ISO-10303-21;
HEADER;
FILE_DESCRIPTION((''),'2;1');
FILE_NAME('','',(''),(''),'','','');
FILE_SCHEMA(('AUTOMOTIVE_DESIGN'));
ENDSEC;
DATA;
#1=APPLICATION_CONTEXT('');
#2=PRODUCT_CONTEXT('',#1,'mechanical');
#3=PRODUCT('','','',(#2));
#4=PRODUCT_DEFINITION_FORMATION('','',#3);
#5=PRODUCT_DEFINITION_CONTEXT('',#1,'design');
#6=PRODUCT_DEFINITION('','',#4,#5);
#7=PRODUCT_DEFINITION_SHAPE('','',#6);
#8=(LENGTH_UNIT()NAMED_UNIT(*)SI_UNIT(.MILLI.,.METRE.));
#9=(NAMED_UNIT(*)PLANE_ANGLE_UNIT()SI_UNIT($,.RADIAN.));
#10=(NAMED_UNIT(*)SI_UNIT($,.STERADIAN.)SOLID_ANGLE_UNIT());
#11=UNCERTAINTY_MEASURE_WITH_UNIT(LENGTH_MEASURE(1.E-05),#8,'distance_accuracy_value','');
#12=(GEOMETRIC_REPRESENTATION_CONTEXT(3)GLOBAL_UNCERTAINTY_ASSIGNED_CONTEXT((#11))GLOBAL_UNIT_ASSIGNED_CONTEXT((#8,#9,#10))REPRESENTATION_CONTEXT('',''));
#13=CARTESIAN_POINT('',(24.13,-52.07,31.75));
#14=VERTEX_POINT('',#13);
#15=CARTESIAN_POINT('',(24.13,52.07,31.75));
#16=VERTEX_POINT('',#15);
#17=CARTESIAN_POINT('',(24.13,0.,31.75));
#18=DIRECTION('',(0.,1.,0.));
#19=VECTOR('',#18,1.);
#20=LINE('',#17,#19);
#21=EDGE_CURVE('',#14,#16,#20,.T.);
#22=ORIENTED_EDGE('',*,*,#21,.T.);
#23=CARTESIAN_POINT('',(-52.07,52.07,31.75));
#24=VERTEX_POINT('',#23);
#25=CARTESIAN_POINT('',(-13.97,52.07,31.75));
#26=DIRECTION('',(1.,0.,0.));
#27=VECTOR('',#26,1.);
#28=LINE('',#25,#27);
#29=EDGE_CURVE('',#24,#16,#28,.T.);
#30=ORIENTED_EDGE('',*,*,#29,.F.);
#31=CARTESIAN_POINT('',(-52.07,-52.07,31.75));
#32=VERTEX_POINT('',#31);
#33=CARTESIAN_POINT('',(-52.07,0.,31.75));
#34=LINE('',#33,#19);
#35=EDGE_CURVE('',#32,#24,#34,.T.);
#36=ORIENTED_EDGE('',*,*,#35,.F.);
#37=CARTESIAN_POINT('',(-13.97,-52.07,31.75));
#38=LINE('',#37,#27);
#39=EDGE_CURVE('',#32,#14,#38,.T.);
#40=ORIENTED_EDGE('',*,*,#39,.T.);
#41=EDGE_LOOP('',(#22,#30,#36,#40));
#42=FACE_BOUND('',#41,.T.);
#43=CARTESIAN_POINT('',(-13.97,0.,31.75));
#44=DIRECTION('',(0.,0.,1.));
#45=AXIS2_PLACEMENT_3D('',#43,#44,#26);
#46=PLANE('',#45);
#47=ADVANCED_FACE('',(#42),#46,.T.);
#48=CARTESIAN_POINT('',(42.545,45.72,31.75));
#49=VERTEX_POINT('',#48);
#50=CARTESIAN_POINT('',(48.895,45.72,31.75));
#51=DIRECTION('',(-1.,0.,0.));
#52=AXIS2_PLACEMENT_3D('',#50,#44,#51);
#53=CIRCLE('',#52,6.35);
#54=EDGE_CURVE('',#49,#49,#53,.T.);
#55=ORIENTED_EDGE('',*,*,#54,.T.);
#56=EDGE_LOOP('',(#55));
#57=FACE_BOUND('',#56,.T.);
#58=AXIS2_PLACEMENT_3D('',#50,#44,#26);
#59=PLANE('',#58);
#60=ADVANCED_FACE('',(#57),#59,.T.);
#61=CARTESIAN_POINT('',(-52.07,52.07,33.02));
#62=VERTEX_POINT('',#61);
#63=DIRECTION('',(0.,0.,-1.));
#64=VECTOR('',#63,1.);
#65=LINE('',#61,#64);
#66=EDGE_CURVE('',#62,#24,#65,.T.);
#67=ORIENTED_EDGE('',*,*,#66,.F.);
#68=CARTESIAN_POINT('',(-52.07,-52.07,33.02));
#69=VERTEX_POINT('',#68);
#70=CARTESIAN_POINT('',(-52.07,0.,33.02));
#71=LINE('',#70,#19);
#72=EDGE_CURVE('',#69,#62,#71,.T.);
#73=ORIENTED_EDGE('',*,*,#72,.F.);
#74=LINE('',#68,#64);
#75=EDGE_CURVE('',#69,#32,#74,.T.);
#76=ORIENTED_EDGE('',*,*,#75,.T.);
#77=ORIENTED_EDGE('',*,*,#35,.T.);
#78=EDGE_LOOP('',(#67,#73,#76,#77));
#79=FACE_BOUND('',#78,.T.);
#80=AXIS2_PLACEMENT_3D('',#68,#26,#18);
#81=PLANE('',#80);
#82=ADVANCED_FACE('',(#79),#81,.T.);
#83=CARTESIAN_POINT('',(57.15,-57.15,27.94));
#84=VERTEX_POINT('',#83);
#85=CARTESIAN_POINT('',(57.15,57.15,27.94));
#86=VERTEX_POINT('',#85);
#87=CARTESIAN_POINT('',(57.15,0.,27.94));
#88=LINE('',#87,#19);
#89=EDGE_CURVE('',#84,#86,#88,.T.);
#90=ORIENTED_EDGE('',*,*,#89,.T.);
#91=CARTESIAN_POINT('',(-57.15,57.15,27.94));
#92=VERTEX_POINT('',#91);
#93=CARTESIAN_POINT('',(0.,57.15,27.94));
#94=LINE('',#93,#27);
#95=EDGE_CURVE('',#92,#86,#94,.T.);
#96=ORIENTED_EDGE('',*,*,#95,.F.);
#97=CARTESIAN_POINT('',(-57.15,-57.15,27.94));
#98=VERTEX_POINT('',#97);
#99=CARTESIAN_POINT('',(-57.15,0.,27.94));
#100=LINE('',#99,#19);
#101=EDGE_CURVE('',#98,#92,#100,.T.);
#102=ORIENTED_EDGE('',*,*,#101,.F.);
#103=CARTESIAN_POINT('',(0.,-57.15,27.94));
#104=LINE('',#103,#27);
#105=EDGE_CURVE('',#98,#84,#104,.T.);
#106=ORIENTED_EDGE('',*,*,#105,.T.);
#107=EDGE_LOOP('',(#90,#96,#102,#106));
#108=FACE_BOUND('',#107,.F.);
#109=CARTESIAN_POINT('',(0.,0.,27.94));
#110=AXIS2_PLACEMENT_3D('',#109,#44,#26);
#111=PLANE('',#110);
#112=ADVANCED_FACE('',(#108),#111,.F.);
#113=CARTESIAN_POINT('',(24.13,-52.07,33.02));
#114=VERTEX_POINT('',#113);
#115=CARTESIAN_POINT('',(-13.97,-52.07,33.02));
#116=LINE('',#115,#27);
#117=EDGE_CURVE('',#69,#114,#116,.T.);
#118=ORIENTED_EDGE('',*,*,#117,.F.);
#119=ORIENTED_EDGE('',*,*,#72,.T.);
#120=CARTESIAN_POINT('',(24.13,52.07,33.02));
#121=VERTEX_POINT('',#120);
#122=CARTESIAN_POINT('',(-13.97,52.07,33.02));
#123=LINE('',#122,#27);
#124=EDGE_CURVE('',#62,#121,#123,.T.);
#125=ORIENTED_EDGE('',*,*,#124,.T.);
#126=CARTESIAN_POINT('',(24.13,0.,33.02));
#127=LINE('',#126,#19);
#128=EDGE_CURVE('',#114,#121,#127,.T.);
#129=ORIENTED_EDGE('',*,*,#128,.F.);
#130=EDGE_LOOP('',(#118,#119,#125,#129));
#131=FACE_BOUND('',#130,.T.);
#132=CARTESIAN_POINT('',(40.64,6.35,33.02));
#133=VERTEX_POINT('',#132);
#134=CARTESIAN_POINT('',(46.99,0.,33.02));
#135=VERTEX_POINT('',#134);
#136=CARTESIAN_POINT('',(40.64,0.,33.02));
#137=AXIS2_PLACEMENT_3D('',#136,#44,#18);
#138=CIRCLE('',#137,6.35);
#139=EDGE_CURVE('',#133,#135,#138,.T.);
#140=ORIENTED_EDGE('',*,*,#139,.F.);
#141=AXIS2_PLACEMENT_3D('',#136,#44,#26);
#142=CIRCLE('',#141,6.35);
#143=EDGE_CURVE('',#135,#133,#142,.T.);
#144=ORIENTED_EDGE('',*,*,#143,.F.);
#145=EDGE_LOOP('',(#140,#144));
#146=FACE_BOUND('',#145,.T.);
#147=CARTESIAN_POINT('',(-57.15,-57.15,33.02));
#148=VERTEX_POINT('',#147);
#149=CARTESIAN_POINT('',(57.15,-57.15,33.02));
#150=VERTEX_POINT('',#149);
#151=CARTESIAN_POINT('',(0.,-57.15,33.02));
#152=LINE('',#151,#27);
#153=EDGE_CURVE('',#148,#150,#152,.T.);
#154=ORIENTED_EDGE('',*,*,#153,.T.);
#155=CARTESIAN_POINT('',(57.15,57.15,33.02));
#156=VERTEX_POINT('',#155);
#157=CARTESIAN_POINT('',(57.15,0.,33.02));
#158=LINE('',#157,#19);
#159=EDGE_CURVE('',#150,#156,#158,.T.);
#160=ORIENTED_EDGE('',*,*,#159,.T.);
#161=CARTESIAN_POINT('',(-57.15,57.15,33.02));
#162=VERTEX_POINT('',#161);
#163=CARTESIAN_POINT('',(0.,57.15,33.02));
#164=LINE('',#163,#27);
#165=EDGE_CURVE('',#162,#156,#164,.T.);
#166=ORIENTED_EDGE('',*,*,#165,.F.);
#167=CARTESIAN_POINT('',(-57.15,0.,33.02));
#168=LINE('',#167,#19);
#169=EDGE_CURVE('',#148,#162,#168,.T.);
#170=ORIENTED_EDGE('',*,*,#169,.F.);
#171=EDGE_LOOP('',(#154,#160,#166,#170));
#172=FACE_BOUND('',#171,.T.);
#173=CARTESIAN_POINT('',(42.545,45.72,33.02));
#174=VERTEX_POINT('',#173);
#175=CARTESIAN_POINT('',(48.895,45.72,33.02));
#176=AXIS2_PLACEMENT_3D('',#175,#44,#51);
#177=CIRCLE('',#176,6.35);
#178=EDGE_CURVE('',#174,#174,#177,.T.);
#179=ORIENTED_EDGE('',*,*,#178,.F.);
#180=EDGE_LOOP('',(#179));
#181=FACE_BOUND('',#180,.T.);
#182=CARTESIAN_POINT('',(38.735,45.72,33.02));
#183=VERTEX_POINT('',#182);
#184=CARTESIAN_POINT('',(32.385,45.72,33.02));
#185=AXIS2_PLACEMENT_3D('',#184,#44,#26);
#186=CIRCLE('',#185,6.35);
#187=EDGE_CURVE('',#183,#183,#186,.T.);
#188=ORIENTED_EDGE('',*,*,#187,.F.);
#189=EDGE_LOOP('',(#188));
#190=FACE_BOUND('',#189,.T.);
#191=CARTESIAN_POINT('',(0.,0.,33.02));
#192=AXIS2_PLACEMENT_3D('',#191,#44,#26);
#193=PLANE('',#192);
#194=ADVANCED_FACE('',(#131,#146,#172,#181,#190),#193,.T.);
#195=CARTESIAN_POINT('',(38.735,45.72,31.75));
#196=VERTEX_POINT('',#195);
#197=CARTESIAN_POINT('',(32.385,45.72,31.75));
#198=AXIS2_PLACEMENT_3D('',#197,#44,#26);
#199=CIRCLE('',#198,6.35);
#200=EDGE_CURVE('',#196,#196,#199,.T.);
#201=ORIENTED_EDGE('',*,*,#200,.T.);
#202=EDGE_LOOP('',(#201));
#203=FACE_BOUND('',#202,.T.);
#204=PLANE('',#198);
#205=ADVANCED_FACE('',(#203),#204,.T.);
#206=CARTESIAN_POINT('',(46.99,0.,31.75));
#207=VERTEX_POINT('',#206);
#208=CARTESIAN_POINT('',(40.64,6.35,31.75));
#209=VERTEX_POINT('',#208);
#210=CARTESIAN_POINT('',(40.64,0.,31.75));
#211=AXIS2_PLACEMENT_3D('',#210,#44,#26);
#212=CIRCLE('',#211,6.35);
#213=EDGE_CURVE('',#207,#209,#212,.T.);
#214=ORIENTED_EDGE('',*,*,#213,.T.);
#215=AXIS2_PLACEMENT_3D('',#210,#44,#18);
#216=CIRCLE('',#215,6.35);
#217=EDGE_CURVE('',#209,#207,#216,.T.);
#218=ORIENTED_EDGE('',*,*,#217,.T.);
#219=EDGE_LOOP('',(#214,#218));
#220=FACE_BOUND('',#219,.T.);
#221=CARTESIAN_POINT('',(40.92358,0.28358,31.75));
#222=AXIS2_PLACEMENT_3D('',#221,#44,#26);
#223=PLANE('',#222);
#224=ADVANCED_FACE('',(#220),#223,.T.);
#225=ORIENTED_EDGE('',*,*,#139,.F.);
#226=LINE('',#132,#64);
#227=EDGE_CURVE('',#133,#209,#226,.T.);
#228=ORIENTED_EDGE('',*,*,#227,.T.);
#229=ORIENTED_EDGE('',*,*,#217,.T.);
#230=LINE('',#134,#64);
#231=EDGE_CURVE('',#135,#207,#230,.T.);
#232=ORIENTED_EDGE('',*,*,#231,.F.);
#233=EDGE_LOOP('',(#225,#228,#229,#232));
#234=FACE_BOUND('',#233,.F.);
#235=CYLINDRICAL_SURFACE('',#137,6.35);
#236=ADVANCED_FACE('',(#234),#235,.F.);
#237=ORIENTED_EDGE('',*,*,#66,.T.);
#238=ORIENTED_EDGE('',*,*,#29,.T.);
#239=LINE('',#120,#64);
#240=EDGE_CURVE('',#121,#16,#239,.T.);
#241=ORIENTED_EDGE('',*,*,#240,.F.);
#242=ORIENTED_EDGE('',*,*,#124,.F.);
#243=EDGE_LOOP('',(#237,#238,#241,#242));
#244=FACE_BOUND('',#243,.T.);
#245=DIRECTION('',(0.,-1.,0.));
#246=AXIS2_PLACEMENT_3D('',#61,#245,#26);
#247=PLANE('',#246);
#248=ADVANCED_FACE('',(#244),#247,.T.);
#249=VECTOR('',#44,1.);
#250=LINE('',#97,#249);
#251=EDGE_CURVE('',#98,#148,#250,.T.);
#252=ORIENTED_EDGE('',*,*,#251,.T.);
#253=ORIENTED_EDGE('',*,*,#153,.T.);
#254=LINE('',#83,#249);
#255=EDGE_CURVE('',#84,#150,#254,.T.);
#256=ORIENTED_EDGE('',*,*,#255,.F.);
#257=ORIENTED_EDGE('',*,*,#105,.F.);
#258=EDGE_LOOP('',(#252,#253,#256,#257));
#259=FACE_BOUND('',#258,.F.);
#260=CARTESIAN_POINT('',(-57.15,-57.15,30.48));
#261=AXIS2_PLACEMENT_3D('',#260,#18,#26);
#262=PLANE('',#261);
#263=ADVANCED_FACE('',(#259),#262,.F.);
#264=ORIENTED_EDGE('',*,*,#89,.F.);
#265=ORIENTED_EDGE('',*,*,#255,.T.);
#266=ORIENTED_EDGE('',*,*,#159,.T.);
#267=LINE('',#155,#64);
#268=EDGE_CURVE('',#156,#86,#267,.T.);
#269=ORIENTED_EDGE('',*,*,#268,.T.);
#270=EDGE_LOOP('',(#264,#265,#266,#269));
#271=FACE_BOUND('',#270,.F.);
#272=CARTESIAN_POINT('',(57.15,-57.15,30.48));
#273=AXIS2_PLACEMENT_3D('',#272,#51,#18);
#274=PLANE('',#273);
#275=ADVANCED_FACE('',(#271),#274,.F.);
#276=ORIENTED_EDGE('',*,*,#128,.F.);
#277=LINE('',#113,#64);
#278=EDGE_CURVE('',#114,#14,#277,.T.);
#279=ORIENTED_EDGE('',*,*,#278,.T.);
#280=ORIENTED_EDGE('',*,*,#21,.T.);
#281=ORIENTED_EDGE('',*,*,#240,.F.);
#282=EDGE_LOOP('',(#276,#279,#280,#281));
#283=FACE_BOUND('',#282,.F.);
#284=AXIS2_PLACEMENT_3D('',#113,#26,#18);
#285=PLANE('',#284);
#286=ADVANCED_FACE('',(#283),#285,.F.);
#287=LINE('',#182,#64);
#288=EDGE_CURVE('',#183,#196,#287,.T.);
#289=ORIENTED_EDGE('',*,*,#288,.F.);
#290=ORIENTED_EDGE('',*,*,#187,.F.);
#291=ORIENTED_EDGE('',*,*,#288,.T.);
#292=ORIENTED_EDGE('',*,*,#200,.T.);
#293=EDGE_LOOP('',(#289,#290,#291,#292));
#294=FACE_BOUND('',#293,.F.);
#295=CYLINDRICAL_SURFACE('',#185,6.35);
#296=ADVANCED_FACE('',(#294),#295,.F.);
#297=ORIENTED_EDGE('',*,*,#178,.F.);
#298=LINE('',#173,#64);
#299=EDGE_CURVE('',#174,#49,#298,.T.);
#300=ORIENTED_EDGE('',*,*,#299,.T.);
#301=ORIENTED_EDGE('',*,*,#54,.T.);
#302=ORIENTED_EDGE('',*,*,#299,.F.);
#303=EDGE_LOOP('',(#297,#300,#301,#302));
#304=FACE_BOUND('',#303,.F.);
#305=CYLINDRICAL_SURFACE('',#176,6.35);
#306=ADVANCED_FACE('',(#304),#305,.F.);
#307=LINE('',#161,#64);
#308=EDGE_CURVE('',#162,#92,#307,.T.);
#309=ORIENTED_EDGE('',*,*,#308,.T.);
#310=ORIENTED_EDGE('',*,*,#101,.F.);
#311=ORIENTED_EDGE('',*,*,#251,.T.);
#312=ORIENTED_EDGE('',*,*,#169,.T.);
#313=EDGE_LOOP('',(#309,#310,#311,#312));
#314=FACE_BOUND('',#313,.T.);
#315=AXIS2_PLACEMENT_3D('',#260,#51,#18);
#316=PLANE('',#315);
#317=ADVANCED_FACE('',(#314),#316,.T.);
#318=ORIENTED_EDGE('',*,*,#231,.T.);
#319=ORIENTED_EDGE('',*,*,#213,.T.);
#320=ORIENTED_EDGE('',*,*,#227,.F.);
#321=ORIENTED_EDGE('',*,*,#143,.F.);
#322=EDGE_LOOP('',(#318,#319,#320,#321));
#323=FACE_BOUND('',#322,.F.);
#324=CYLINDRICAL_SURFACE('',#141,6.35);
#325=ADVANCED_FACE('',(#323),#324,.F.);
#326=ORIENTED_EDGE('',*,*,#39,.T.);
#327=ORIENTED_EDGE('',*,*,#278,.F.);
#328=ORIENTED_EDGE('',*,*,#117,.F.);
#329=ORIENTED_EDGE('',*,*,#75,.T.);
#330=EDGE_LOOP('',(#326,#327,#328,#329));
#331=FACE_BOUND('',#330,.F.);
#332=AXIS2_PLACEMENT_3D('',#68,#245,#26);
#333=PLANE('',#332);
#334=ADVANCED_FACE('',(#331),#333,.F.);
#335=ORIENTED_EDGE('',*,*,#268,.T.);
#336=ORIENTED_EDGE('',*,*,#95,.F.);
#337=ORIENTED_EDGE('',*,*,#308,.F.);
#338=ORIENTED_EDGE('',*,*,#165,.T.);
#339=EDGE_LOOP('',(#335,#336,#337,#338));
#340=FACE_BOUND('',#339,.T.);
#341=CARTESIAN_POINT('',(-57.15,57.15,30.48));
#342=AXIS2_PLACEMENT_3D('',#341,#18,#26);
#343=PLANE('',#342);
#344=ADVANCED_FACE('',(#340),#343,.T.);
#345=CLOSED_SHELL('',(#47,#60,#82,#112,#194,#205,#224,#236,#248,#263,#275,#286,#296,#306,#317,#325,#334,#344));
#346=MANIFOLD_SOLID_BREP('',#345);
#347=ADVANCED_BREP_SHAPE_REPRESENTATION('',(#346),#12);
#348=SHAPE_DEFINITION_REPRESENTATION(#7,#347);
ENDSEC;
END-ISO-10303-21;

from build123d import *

# Parameters (mm, degrees)
F0_W      = 114.3
F0_H      = 114.3
F1_DEPTH  = 2.54
F8_W      = 114.3
F8_H      = 114.3
F9_DEPTH  = 2.54
F10_W     = 114.3
F10_H     = 114.3
F11_DEPTH = 2.54
F12_W     = 76.2
F12_H     = 104.14
F13_DEPTH = 1.27
F14_R     = 6.35
F15_DEPTH = 1.27
F17_W     = 111.252
F17_H     = 111.252
F18_DEPTH = 1.905


# Not quite as in the source:
# - a feature of the source that left no trace in its solid (it failed there, or was rolled back) is left out


with BuildPart() as f1:
    # F0 (on Top) → F1 (new body)
    with BuildSketch(Plane.XY):
        Rectangle(F0_W, F0_H)
    extrude(amount=F1_DEPTH)


with BuildPart() as f9:
    # F8 (on face) → F9 (new body)
    with BuildSketch(Plane.XY.offset(27.94)):
        Rectangle(F8_W, F8_H)
    extrude(amount=F9_DEPTH)

    # F10 (on face) → F11 (join)
    with BuildSketch(Plane.XY.offset(30.48)):
        Rectangle(F10_W, F10_H)
    extrude(amount=F11_DEPTH)

    # F12 (on face) → F13 (cut)
    with BuildSketch(Plane.XY.offset(33.02)):
        with Locations((-13.97, 0)):
            Rectangle(F12_W, F12_H)
    extrude(amount=-F13_DEPTH, mode=Mode.SUBTRACT)

    # F14 (on face) → F15 (cut)
    with BuildSketch(Plane.XY.offset(33.02)):
        with BuildLine():
            ThreePointArc((55.245, 45.72), (48.895, 52.07), (42.545, 45.72))
            ThreePointArc((42.545, 45.72), (48.895, 39.37), (55.245, 45.72))
        make_face()
        with Locations((32.385, 45.72)):
            Circle(F14_R)
        with BuildLine():
            ThreePointArc((40.64, 6.35), (36.1498719395, -4.4901280605), (46.99, 0))
            ThreePointArc((46.99, 0), (45.1301280605, 4.4901280605), (40.64, 6.35))
        make_face()
    extrude(amount=-F15_DEPTH, mode=Mode.SUBTRACT)


with BuildPart() as f18:
    # F17 (on face) → F18 (new body)
    with BuildSketch(Plane(origin=(0, 0, 27.94), x_dir=(1, 0, 0), z_dir=(0, 0, -1))):
        Rectangle(F17_W, F17_H)
    extrude(amount=F18_DEPTH)


solid = f9.part
